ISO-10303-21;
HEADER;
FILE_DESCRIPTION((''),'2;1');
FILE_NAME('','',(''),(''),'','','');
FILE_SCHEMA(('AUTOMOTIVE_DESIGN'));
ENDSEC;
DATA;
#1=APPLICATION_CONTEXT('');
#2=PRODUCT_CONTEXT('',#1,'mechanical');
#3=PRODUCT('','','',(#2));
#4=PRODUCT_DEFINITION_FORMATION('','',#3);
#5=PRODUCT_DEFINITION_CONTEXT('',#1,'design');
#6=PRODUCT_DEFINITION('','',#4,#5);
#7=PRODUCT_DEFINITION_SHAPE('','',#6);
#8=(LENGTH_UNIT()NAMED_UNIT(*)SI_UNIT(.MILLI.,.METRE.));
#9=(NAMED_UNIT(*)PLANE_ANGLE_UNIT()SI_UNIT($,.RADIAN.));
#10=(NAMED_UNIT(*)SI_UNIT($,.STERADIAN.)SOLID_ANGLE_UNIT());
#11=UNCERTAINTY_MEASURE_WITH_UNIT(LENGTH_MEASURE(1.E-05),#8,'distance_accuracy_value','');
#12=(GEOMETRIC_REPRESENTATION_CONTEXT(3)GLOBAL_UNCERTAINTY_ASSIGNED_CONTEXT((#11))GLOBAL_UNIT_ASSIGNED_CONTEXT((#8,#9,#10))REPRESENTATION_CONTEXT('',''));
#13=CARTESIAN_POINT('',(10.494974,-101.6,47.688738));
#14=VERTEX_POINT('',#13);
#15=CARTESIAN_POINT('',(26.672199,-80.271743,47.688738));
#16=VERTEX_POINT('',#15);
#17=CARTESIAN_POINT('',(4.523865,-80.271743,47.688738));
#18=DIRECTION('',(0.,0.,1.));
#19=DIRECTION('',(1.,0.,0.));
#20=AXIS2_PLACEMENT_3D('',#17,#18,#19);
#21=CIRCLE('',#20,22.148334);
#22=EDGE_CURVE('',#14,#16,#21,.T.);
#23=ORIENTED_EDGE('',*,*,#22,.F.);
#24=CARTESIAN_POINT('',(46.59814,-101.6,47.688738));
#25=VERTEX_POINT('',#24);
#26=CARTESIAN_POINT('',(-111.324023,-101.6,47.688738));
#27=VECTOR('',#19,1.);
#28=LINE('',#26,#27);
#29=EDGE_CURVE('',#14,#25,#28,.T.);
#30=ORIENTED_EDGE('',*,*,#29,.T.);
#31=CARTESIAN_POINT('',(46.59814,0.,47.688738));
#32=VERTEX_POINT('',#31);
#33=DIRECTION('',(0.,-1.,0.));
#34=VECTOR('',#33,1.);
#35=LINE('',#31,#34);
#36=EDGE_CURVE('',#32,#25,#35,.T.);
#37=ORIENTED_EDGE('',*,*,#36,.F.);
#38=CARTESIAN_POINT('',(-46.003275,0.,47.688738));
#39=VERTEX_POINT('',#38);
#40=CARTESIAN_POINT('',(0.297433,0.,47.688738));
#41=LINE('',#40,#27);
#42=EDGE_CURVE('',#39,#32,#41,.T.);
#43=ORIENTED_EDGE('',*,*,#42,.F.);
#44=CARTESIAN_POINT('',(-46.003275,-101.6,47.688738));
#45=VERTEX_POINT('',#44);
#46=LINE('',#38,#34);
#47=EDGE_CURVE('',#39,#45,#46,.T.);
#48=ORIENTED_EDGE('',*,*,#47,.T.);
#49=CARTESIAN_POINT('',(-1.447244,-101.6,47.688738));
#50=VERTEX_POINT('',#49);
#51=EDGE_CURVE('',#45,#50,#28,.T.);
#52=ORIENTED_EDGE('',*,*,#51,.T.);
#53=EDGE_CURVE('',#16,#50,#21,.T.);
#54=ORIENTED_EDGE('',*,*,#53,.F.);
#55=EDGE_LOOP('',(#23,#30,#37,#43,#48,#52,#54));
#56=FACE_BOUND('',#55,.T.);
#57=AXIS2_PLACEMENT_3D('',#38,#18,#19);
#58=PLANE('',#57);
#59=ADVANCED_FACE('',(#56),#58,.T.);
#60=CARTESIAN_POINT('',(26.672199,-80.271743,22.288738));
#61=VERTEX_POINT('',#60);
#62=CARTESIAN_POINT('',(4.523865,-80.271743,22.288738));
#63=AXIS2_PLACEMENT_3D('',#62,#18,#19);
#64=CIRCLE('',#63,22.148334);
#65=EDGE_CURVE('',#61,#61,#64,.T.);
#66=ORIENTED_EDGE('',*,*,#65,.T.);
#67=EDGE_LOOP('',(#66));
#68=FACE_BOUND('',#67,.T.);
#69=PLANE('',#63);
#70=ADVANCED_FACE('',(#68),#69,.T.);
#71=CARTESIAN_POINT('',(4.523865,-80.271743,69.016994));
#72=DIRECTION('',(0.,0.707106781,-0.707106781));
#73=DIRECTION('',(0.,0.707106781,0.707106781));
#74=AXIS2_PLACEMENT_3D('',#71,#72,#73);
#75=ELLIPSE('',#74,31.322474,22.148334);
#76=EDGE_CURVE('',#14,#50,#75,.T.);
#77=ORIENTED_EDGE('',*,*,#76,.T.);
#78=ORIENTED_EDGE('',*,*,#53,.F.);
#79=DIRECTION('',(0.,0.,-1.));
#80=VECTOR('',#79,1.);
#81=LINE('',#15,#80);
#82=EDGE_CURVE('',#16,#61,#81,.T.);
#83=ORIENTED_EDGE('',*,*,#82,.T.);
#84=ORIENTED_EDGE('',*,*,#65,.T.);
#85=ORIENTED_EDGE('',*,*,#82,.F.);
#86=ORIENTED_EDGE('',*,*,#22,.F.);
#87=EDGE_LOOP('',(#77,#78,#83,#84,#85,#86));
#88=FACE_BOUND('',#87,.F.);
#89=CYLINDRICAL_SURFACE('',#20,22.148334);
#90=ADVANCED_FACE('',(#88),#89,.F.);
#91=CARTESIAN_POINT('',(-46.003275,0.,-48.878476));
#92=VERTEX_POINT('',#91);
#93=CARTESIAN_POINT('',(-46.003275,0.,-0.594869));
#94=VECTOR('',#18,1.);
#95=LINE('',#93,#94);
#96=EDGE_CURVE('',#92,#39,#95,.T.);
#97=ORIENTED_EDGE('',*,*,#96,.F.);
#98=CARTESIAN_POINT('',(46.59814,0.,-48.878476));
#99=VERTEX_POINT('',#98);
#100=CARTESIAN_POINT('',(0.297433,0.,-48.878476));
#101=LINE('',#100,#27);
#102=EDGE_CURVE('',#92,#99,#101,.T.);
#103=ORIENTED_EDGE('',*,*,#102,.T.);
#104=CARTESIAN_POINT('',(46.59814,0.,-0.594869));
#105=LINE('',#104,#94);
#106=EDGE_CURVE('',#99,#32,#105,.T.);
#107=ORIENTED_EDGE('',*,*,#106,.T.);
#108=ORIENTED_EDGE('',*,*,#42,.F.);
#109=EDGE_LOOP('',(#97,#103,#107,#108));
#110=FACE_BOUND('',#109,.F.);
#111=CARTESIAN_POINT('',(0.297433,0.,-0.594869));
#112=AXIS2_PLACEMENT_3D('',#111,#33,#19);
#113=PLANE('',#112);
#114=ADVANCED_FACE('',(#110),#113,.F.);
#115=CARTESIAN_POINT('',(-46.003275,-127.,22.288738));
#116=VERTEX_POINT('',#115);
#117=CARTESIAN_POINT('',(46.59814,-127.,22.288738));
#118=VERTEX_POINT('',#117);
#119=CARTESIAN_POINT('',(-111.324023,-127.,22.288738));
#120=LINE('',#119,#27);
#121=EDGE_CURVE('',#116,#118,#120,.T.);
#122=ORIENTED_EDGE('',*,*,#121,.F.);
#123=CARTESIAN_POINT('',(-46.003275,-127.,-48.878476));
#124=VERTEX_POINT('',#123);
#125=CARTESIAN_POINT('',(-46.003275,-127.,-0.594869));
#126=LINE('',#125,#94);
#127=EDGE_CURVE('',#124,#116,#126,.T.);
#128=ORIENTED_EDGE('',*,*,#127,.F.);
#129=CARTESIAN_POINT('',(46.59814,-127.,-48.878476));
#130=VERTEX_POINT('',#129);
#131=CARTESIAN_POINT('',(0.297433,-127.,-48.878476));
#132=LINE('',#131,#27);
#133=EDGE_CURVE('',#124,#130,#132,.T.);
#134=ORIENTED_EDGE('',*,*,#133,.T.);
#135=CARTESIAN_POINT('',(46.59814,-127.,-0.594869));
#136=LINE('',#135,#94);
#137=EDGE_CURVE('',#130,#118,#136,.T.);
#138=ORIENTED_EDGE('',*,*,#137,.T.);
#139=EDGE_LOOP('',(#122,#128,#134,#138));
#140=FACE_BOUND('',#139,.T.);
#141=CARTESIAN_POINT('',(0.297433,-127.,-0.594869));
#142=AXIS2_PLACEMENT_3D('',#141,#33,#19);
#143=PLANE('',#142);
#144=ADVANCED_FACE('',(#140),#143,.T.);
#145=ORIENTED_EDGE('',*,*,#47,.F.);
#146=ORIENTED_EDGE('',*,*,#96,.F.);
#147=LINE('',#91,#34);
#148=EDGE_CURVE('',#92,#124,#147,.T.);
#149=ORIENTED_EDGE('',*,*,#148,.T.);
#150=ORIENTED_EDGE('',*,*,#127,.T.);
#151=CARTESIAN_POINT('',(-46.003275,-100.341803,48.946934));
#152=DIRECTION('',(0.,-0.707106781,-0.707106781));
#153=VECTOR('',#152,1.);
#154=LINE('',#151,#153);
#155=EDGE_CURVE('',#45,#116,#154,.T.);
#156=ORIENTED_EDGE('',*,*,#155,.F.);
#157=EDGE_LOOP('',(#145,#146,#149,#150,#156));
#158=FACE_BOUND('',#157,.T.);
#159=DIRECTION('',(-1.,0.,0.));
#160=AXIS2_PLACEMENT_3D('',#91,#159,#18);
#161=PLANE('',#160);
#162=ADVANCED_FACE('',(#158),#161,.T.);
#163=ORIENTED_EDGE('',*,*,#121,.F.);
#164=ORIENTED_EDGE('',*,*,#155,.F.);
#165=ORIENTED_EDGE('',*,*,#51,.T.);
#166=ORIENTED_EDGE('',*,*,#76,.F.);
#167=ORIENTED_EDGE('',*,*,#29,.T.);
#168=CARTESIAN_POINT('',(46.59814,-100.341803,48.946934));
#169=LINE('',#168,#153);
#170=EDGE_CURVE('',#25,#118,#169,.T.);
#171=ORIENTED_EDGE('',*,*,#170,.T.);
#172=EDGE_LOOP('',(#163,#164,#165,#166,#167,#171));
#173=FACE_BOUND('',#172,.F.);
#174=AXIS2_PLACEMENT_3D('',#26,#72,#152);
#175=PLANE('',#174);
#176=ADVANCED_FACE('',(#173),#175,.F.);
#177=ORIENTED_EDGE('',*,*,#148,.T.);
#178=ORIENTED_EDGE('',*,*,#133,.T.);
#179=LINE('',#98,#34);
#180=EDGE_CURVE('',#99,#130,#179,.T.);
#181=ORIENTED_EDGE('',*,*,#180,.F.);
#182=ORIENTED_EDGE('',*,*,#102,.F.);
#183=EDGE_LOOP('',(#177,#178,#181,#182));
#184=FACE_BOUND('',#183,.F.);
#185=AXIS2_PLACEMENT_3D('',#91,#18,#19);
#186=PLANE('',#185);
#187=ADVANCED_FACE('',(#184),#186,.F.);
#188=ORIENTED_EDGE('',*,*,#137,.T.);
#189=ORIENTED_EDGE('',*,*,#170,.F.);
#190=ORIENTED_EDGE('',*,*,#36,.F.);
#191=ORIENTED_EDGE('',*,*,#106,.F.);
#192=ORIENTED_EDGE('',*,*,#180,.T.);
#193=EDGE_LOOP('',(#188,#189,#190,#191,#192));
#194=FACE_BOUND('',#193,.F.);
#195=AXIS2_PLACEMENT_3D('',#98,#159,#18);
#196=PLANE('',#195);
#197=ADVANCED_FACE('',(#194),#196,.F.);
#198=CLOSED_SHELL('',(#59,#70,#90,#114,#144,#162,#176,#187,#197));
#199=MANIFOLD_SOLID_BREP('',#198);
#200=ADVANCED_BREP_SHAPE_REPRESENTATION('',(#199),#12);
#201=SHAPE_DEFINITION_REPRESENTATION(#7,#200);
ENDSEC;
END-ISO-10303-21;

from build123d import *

# Parameters (mm, degrees)
F0_W        = 92.6014147699
F0_H        = 96.5672135353
F1_DEPTH    = 127
F2_R        = 22.1483335528
F3_DEPTH    = 25.4
F4_T1_DEPTH = 223.2429105586


# Not quite as in the source:
# - a fillet or chamfer that OpenCascade refuses, or shapes differently, is made with other operations: its cross-section is extruded or revolved along the edge and cut away or added


with BuildPart() as f1:
    # F0 (on Front) → F1 (new body)
    with BuildSketch(Plane.XZ):
        with Locations((0.2974327654, -0.594869256)):
            Rectangle(F0_W, F0_H)
    extrude(amount=F1_DEPTH)

    # F2 (on face) → F3 (cut)
    with BuildSketch(Plane.XY.offset(47.6887375116)):
        with Locations((4.5238654129, -80.271743238)):
            Circle(F2_R)
    extrude(amount=-F3_DEPTH, mode=Mode.SUBTRACT)

    # F4: chamfer of 25.4 on 1 edges, made by hand

    # F4_s2 → F4_t1 (cut)
    with BuildSketch(Plane.YZ.offset(-111.3240225139)):
        Polygon((-101.6, 47.6887375116), (-127, 22.2887375116), (-127, 47.6887375116), align=None)
    extrude(amount=F4_T1_DEPTH, mode=Mode.SUBTRACT)


solid = f1.part
